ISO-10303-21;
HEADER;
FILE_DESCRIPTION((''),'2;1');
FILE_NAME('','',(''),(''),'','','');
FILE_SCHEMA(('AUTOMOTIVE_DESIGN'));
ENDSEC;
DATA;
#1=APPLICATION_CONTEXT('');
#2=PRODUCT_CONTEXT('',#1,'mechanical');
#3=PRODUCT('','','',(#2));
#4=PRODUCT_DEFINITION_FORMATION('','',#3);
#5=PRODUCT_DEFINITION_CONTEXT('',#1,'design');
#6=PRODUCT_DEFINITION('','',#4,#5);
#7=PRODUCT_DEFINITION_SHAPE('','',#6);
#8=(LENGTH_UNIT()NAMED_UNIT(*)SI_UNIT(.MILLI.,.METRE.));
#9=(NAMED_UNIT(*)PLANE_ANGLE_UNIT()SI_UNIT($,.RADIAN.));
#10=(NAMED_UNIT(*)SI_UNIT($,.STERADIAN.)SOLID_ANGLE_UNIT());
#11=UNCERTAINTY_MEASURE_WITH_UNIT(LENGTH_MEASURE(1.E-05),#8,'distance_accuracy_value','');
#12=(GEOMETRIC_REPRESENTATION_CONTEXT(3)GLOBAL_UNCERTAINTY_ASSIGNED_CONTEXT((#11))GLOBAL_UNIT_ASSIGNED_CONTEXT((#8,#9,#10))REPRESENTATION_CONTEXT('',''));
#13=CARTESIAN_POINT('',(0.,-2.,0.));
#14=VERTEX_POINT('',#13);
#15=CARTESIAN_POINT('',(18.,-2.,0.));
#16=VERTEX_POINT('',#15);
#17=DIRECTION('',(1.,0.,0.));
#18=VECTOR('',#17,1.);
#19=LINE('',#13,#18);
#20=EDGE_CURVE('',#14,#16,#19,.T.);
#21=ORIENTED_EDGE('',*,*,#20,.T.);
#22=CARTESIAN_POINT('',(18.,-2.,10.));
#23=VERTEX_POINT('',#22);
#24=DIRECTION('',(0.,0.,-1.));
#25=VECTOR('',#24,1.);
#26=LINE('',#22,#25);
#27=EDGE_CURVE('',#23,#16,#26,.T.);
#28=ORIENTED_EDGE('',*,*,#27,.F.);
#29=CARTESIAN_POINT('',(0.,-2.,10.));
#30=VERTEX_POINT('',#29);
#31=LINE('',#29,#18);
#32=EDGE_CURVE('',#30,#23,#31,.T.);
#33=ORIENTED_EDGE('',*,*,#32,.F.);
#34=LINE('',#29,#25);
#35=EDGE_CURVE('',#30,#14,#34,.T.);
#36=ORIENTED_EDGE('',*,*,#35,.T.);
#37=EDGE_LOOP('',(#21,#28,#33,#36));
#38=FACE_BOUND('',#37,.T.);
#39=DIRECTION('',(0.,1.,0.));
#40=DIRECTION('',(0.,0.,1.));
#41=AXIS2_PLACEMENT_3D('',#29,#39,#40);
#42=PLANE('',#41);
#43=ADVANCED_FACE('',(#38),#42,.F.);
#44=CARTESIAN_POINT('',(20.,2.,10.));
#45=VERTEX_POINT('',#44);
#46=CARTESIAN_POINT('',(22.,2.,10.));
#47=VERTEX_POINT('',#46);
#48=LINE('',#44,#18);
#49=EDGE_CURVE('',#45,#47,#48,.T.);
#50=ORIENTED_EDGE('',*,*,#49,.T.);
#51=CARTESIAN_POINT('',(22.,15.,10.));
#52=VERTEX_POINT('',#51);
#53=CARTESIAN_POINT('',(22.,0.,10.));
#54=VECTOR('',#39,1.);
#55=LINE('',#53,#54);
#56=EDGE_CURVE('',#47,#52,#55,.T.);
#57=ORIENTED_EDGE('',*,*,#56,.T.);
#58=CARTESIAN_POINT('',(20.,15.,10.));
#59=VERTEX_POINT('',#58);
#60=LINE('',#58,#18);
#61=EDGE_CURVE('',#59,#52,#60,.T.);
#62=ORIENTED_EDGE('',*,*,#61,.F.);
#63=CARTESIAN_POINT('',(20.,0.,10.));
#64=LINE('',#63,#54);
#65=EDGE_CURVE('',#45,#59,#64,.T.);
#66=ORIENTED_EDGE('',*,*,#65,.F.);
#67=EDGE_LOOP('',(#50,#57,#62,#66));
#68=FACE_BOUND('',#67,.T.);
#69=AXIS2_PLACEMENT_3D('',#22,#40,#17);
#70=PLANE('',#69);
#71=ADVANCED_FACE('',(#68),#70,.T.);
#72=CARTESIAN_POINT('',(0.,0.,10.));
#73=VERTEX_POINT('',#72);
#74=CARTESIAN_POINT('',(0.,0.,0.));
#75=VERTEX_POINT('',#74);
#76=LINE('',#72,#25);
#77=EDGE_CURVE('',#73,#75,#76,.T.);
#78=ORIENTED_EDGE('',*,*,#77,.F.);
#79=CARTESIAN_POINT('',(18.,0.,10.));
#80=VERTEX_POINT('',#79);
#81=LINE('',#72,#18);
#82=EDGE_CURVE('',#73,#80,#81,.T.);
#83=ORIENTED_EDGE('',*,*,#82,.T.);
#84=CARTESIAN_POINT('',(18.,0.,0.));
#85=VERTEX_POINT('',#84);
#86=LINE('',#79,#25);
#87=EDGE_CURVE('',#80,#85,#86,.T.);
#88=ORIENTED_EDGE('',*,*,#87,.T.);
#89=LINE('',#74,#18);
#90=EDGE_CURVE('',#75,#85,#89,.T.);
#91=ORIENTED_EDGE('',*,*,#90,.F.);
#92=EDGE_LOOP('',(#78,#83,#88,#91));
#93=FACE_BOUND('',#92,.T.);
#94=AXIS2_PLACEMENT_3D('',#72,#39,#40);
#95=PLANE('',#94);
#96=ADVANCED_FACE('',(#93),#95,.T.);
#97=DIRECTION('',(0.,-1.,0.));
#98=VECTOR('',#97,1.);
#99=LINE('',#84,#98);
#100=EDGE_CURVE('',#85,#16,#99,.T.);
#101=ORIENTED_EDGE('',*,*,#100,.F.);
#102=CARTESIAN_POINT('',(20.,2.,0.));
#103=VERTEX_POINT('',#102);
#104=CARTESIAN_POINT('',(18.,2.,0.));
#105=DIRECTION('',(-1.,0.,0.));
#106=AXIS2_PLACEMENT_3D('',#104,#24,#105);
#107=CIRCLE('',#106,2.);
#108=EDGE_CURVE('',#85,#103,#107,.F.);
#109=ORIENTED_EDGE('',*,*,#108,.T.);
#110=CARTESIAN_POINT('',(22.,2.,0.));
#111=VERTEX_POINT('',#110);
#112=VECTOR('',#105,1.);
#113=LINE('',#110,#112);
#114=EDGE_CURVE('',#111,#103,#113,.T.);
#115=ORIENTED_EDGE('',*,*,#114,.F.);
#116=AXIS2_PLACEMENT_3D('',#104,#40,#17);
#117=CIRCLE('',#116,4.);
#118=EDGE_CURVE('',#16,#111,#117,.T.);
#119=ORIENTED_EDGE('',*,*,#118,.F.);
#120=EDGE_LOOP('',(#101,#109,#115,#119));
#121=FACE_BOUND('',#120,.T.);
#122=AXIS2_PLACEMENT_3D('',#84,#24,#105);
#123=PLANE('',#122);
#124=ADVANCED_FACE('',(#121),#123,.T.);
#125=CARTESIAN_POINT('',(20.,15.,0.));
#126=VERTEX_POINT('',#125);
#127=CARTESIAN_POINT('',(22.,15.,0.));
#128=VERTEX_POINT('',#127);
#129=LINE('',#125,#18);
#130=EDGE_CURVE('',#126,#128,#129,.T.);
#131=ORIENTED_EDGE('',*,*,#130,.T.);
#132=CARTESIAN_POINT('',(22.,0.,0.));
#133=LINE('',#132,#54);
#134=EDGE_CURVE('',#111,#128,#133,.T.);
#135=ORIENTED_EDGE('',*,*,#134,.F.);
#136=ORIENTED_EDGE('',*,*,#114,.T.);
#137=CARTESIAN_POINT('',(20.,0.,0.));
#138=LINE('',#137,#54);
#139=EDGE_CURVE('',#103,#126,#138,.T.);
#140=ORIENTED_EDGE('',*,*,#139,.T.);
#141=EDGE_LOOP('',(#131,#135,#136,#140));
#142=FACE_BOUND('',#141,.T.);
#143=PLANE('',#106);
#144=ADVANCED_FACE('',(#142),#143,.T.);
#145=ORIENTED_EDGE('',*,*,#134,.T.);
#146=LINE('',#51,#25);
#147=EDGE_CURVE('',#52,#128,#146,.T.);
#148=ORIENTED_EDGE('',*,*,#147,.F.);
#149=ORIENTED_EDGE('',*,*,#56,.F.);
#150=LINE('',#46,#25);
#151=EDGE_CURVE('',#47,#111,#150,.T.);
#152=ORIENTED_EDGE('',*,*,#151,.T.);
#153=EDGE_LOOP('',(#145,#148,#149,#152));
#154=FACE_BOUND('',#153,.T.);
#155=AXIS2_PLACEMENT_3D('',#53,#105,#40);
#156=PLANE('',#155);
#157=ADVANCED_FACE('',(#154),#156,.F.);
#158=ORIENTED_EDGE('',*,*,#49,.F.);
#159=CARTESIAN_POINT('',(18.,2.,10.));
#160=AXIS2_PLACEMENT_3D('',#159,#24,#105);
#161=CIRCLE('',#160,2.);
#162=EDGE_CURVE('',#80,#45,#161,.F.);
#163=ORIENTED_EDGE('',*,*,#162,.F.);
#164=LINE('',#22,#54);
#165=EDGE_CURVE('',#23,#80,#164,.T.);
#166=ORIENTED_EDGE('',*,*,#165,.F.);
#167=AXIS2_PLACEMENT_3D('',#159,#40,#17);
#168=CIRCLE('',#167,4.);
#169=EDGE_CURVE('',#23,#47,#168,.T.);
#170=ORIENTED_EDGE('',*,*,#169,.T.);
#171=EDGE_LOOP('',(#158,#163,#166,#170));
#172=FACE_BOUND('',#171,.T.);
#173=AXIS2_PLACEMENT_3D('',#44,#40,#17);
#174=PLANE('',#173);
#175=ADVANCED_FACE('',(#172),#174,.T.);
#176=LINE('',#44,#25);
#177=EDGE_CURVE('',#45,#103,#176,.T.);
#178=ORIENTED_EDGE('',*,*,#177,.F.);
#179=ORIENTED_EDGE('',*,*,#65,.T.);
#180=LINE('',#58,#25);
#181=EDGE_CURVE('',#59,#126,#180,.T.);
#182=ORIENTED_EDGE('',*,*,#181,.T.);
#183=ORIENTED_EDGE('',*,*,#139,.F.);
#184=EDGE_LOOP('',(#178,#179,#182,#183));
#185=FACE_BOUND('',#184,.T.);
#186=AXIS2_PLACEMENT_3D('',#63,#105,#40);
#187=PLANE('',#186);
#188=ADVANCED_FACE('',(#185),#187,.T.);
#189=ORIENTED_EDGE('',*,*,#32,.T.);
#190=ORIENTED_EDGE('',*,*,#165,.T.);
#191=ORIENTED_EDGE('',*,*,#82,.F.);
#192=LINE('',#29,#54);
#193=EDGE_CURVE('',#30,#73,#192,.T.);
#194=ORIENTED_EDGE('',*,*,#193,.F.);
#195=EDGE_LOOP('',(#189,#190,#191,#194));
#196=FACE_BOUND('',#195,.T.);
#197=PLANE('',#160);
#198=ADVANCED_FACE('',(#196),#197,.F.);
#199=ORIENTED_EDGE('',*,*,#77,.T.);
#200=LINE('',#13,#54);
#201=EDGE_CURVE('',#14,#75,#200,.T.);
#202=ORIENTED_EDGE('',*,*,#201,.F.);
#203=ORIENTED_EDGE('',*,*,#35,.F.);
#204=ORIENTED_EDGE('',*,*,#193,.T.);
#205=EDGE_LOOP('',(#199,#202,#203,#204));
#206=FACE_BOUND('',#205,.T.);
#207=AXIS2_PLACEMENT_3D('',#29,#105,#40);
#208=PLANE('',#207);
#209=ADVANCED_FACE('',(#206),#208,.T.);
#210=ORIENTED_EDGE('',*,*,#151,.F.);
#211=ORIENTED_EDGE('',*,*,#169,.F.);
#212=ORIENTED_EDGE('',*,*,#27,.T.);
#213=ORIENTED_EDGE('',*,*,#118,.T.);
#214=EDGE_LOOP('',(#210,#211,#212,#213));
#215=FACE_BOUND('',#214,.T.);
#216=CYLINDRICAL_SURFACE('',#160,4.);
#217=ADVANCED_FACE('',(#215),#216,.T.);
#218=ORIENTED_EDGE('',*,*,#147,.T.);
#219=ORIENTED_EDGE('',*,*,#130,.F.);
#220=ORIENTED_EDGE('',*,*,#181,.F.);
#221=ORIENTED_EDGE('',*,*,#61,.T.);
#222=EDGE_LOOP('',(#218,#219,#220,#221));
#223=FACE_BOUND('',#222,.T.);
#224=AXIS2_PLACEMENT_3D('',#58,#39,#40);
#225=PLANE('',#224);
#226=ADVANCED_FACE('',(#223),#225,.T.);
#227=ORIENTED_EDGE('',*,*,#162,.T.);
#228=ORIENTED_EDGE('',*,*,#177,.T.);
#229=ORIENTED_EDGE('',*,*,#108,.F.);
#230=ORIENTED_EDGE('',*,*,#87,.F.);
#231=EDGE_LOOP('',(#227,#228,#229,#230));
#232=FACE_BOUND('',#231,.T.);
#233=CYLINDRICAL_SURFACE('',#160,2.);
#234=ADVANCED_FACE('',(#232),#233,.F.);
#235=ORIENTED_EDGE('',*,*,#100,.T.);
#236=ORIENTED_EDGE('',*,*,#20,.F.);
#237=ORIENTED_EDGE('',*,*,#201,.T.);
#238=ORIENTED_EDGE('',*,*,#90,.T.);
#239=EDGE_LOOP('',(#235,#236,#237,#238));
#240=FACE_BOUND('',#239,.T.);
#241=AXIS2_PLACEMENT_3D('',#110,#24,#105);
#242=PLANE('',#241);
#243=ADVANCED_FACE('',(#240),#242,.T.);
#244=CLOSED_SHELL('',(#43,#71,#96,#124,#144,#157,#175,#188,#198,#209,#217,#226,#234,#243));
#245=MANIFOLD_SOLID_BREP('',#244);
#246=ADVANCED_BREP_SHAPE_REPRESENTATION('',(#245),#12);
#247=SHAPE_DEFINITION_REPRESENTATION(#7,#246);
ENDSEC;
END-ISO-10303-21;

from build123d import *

# Parameters (mm, degrees)
SM_BASE_FLANGE_1_DEPTH = 10


# Sheet-metal steps are written as plain solids
with BuildPart() as part:
    # Sketch 1 → 基体-法兰1 (new body)
    with BuildSketch(Plane.XY):
        with BuildLine():
            Line((0, 0), (18, 0))
            ThreePointArc((18, 0), (19.414213562, 0.585786438), (20, 2))
            Line((20, 2), (20, 15))
            Line((20, 15), (22, 15))
            Line((22, 15), (22, 2))
            ThreePointArc((22, 2), (20.828427125, -0.828427125), (18, -2))
            Line((18, -2), (0, -2))
            Line((0, -2), (0, 0))
        make_face()
    extrude(amount=SM_BASE_FLANGE_1_DEPTH)


solid = part.part
